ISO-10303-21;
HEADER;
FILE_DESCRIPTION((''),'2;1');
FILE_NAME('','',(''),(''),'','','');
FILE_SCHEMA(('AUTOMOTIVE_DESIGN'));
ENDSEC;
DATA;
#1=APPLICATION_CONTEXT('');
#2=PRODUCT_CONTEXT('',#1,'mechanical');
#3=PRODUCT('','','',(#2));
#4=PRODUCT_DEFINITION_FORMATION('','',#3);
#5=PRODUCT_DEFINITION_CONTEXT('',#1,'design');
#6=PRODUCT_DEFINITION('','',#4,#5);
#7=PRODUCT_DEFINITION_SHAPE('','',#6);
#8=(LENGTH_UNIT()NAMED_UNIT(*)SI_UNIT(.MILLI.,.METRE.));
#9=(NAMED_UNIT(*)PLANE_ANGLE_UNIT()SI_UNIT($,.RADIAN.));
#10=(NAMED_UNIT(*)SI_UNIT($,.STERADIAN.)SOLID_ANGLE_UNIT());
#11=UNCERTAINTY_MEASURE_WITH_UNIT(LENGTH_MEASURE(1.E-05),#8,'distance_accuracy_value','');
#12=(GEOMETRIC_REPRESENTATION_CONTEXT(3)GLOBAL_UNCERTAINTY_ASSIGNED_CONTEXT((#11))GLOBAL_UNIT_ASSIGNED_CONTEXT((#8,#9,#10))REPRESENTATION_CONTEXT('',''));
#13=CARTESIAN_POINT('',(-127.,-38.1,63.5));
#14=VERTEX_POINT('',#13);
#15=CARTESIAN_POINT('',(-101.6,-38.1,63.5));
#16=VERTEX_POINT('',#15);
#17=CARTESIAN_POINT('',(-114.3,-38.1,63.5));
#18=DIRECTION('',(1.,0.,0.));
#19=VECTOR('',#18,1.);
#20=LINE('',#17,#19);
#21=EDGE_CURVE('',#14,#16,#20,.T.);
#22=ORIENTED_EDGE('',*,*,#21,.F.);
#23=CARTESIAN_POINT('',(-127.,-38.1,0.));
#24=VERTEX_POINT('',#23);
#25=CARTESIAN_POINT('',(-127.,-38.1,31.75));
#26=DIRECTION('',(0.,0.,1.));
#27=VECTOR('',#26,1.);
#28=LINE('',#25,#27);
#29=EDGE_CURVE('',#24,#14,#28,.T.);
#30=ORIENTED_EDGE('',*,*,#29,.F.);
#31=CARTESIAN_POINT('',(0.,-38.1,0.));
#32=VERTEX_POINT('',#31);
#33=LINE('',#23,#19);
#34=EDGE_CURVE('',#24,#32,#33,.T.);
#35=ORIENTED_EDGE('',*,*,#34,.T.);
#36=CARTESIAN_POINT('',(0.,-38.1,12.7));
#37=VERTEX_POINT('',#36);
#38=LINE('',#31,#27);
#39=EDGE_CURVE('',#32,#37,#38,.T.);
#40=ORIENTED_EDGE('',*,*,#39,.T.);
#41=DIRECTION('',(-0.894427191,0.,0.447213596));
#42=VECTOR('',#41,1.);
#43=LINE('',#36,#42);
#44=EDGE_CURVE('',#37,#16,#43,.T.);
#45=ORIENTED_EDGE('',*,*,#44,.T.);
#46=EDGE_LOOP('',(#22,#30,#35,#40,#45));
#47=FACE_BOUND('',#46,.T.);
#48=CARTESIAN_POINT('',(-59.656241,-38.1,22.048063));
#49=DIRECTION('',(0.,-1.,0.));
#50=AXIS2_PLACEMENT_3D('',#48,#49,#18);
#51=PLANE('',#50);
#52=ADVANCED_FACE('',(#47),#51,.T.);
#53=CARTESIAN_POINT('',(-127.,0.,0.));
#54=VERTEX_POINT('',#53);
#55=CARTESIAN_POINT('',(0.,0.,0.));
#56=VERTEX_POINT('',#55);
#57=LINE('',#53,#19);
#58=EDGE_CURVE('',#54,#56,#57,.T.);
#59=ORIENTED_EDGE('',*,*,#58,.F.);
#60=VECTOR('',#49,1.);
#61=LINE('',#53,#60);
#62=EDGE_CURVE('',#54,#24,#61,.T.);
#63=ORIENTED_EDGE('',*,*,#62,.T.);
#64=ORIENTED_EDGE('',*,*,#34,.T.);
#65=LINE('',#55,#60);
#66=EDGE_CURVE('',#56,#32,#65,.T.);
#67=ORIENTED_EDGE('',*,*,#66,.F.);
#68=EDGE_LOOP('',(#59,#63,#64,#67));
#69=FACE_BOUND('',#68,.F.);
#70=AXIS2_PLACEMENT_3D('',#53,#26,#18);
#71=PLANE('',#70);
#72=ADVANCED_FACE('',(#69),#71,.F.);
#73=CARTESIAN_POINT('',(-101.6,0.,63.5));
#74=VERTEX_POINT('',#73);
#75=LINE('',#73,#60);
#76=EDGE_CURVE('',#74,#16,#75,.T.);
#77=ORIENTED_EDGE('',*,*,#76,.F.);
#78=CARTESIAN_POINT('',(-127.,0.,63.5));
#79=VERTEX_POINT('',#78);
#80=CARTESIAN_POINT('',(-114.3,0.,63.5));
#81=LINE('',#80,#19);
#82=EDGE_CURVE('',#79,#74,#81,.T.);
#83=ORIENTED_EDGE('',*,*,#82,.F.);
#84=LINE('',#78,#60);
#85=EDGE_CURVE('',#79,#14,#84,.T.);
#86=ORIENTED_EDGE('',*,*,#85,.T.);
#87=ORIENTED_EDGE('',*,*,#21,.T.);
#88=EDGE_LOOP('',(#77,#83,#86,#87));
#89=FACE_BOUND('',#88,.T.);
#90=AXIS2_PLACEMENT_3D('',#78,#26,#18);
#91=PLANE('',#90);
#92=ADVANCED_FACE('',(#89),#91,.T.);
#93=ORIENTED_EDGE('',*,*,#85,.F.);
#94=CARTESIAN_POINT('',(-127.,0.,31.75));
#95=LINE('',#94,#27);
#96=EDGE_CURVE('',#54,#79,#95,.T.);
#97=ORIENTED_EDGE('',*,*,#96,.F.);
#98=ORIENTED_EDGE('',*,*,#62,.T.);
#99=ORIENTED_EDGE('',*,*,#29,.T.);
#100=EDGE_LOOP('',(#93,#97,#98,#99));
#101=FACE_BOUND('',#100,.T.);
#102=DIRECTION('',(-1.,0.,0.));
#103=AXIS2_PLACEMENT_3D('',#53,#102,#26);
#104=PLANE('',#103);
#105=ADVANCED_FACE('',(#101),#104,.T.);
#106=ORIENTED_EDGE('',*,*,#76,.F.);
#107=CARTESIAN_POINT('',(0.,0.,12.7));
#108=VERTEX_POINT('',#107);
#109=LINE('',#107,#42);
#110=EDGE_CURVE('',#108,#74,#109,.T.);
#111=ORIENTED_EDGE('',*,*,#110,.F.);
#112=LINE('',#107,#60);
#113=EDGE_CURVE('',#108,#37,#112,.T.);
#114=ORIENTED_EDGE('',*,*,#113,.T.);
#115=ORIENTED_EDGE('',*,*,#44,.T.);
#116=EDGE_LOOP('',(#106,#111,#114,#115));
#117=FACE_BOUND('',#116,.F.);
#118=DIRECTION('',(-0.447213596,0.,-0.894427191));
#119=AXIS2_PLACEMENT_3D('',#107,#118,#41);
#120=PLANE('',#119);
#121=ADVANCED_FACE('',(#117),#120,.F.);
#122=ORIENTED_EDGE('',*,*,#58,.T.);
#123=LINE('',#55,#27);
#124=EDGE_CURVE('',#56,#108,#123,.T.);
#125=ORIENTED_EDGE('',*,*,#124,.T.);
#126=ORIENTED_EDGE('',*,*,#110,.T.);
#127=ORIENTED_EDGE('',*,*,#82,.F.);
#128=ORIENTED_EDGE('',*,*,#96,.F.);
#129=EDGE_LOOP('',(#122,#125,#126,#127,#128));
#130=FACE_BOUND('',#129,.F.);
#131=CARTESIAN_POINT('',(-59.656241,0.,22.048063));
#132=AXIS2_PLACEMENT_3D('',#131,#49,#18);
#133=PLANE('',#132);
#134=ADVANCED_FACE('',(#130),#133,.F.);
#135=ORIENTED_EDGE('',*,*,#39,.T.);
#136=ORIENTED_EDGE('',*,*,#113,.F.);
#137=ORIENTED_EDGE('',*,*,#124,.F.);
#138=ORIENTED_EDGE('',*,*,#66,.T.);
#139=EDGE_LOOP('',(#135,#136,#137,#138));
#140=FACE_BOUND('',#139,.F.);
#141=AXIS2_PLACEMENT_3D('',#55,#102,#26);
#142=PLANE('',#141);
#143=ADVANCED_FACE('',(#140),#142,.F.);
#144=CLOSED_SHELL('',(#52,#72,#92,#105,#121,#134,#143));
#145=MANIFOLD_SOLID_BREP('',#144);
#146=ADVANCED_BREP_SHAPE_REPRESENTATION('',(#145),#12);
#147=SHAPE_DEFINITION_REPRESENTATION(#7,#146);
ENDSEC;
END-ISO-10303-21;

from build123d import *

# Parameters (mm, degrees)
F0_W     = 25.4
F0_H     = 63.5
F1_DEPTH = 38.1


# Not quite as in the source:
# - a feature names something its author has since deleted; it is built from what else it names


with BuildPart() as f1:
    # F0 (on Front) → F1 (new body)
    with BuildSketch(Plane.XZ):
        Polygon((-101.6, 63.5), (-101.6, 0), (-29.9632605165, 0), (0, 0), (0, 12.7), align=None)
        with Locations((-114.3, 31.75)):
            Rectangle(F0_W, F0_H)
    extrude(amount=F1_DEPTH)


solid = f1.part
